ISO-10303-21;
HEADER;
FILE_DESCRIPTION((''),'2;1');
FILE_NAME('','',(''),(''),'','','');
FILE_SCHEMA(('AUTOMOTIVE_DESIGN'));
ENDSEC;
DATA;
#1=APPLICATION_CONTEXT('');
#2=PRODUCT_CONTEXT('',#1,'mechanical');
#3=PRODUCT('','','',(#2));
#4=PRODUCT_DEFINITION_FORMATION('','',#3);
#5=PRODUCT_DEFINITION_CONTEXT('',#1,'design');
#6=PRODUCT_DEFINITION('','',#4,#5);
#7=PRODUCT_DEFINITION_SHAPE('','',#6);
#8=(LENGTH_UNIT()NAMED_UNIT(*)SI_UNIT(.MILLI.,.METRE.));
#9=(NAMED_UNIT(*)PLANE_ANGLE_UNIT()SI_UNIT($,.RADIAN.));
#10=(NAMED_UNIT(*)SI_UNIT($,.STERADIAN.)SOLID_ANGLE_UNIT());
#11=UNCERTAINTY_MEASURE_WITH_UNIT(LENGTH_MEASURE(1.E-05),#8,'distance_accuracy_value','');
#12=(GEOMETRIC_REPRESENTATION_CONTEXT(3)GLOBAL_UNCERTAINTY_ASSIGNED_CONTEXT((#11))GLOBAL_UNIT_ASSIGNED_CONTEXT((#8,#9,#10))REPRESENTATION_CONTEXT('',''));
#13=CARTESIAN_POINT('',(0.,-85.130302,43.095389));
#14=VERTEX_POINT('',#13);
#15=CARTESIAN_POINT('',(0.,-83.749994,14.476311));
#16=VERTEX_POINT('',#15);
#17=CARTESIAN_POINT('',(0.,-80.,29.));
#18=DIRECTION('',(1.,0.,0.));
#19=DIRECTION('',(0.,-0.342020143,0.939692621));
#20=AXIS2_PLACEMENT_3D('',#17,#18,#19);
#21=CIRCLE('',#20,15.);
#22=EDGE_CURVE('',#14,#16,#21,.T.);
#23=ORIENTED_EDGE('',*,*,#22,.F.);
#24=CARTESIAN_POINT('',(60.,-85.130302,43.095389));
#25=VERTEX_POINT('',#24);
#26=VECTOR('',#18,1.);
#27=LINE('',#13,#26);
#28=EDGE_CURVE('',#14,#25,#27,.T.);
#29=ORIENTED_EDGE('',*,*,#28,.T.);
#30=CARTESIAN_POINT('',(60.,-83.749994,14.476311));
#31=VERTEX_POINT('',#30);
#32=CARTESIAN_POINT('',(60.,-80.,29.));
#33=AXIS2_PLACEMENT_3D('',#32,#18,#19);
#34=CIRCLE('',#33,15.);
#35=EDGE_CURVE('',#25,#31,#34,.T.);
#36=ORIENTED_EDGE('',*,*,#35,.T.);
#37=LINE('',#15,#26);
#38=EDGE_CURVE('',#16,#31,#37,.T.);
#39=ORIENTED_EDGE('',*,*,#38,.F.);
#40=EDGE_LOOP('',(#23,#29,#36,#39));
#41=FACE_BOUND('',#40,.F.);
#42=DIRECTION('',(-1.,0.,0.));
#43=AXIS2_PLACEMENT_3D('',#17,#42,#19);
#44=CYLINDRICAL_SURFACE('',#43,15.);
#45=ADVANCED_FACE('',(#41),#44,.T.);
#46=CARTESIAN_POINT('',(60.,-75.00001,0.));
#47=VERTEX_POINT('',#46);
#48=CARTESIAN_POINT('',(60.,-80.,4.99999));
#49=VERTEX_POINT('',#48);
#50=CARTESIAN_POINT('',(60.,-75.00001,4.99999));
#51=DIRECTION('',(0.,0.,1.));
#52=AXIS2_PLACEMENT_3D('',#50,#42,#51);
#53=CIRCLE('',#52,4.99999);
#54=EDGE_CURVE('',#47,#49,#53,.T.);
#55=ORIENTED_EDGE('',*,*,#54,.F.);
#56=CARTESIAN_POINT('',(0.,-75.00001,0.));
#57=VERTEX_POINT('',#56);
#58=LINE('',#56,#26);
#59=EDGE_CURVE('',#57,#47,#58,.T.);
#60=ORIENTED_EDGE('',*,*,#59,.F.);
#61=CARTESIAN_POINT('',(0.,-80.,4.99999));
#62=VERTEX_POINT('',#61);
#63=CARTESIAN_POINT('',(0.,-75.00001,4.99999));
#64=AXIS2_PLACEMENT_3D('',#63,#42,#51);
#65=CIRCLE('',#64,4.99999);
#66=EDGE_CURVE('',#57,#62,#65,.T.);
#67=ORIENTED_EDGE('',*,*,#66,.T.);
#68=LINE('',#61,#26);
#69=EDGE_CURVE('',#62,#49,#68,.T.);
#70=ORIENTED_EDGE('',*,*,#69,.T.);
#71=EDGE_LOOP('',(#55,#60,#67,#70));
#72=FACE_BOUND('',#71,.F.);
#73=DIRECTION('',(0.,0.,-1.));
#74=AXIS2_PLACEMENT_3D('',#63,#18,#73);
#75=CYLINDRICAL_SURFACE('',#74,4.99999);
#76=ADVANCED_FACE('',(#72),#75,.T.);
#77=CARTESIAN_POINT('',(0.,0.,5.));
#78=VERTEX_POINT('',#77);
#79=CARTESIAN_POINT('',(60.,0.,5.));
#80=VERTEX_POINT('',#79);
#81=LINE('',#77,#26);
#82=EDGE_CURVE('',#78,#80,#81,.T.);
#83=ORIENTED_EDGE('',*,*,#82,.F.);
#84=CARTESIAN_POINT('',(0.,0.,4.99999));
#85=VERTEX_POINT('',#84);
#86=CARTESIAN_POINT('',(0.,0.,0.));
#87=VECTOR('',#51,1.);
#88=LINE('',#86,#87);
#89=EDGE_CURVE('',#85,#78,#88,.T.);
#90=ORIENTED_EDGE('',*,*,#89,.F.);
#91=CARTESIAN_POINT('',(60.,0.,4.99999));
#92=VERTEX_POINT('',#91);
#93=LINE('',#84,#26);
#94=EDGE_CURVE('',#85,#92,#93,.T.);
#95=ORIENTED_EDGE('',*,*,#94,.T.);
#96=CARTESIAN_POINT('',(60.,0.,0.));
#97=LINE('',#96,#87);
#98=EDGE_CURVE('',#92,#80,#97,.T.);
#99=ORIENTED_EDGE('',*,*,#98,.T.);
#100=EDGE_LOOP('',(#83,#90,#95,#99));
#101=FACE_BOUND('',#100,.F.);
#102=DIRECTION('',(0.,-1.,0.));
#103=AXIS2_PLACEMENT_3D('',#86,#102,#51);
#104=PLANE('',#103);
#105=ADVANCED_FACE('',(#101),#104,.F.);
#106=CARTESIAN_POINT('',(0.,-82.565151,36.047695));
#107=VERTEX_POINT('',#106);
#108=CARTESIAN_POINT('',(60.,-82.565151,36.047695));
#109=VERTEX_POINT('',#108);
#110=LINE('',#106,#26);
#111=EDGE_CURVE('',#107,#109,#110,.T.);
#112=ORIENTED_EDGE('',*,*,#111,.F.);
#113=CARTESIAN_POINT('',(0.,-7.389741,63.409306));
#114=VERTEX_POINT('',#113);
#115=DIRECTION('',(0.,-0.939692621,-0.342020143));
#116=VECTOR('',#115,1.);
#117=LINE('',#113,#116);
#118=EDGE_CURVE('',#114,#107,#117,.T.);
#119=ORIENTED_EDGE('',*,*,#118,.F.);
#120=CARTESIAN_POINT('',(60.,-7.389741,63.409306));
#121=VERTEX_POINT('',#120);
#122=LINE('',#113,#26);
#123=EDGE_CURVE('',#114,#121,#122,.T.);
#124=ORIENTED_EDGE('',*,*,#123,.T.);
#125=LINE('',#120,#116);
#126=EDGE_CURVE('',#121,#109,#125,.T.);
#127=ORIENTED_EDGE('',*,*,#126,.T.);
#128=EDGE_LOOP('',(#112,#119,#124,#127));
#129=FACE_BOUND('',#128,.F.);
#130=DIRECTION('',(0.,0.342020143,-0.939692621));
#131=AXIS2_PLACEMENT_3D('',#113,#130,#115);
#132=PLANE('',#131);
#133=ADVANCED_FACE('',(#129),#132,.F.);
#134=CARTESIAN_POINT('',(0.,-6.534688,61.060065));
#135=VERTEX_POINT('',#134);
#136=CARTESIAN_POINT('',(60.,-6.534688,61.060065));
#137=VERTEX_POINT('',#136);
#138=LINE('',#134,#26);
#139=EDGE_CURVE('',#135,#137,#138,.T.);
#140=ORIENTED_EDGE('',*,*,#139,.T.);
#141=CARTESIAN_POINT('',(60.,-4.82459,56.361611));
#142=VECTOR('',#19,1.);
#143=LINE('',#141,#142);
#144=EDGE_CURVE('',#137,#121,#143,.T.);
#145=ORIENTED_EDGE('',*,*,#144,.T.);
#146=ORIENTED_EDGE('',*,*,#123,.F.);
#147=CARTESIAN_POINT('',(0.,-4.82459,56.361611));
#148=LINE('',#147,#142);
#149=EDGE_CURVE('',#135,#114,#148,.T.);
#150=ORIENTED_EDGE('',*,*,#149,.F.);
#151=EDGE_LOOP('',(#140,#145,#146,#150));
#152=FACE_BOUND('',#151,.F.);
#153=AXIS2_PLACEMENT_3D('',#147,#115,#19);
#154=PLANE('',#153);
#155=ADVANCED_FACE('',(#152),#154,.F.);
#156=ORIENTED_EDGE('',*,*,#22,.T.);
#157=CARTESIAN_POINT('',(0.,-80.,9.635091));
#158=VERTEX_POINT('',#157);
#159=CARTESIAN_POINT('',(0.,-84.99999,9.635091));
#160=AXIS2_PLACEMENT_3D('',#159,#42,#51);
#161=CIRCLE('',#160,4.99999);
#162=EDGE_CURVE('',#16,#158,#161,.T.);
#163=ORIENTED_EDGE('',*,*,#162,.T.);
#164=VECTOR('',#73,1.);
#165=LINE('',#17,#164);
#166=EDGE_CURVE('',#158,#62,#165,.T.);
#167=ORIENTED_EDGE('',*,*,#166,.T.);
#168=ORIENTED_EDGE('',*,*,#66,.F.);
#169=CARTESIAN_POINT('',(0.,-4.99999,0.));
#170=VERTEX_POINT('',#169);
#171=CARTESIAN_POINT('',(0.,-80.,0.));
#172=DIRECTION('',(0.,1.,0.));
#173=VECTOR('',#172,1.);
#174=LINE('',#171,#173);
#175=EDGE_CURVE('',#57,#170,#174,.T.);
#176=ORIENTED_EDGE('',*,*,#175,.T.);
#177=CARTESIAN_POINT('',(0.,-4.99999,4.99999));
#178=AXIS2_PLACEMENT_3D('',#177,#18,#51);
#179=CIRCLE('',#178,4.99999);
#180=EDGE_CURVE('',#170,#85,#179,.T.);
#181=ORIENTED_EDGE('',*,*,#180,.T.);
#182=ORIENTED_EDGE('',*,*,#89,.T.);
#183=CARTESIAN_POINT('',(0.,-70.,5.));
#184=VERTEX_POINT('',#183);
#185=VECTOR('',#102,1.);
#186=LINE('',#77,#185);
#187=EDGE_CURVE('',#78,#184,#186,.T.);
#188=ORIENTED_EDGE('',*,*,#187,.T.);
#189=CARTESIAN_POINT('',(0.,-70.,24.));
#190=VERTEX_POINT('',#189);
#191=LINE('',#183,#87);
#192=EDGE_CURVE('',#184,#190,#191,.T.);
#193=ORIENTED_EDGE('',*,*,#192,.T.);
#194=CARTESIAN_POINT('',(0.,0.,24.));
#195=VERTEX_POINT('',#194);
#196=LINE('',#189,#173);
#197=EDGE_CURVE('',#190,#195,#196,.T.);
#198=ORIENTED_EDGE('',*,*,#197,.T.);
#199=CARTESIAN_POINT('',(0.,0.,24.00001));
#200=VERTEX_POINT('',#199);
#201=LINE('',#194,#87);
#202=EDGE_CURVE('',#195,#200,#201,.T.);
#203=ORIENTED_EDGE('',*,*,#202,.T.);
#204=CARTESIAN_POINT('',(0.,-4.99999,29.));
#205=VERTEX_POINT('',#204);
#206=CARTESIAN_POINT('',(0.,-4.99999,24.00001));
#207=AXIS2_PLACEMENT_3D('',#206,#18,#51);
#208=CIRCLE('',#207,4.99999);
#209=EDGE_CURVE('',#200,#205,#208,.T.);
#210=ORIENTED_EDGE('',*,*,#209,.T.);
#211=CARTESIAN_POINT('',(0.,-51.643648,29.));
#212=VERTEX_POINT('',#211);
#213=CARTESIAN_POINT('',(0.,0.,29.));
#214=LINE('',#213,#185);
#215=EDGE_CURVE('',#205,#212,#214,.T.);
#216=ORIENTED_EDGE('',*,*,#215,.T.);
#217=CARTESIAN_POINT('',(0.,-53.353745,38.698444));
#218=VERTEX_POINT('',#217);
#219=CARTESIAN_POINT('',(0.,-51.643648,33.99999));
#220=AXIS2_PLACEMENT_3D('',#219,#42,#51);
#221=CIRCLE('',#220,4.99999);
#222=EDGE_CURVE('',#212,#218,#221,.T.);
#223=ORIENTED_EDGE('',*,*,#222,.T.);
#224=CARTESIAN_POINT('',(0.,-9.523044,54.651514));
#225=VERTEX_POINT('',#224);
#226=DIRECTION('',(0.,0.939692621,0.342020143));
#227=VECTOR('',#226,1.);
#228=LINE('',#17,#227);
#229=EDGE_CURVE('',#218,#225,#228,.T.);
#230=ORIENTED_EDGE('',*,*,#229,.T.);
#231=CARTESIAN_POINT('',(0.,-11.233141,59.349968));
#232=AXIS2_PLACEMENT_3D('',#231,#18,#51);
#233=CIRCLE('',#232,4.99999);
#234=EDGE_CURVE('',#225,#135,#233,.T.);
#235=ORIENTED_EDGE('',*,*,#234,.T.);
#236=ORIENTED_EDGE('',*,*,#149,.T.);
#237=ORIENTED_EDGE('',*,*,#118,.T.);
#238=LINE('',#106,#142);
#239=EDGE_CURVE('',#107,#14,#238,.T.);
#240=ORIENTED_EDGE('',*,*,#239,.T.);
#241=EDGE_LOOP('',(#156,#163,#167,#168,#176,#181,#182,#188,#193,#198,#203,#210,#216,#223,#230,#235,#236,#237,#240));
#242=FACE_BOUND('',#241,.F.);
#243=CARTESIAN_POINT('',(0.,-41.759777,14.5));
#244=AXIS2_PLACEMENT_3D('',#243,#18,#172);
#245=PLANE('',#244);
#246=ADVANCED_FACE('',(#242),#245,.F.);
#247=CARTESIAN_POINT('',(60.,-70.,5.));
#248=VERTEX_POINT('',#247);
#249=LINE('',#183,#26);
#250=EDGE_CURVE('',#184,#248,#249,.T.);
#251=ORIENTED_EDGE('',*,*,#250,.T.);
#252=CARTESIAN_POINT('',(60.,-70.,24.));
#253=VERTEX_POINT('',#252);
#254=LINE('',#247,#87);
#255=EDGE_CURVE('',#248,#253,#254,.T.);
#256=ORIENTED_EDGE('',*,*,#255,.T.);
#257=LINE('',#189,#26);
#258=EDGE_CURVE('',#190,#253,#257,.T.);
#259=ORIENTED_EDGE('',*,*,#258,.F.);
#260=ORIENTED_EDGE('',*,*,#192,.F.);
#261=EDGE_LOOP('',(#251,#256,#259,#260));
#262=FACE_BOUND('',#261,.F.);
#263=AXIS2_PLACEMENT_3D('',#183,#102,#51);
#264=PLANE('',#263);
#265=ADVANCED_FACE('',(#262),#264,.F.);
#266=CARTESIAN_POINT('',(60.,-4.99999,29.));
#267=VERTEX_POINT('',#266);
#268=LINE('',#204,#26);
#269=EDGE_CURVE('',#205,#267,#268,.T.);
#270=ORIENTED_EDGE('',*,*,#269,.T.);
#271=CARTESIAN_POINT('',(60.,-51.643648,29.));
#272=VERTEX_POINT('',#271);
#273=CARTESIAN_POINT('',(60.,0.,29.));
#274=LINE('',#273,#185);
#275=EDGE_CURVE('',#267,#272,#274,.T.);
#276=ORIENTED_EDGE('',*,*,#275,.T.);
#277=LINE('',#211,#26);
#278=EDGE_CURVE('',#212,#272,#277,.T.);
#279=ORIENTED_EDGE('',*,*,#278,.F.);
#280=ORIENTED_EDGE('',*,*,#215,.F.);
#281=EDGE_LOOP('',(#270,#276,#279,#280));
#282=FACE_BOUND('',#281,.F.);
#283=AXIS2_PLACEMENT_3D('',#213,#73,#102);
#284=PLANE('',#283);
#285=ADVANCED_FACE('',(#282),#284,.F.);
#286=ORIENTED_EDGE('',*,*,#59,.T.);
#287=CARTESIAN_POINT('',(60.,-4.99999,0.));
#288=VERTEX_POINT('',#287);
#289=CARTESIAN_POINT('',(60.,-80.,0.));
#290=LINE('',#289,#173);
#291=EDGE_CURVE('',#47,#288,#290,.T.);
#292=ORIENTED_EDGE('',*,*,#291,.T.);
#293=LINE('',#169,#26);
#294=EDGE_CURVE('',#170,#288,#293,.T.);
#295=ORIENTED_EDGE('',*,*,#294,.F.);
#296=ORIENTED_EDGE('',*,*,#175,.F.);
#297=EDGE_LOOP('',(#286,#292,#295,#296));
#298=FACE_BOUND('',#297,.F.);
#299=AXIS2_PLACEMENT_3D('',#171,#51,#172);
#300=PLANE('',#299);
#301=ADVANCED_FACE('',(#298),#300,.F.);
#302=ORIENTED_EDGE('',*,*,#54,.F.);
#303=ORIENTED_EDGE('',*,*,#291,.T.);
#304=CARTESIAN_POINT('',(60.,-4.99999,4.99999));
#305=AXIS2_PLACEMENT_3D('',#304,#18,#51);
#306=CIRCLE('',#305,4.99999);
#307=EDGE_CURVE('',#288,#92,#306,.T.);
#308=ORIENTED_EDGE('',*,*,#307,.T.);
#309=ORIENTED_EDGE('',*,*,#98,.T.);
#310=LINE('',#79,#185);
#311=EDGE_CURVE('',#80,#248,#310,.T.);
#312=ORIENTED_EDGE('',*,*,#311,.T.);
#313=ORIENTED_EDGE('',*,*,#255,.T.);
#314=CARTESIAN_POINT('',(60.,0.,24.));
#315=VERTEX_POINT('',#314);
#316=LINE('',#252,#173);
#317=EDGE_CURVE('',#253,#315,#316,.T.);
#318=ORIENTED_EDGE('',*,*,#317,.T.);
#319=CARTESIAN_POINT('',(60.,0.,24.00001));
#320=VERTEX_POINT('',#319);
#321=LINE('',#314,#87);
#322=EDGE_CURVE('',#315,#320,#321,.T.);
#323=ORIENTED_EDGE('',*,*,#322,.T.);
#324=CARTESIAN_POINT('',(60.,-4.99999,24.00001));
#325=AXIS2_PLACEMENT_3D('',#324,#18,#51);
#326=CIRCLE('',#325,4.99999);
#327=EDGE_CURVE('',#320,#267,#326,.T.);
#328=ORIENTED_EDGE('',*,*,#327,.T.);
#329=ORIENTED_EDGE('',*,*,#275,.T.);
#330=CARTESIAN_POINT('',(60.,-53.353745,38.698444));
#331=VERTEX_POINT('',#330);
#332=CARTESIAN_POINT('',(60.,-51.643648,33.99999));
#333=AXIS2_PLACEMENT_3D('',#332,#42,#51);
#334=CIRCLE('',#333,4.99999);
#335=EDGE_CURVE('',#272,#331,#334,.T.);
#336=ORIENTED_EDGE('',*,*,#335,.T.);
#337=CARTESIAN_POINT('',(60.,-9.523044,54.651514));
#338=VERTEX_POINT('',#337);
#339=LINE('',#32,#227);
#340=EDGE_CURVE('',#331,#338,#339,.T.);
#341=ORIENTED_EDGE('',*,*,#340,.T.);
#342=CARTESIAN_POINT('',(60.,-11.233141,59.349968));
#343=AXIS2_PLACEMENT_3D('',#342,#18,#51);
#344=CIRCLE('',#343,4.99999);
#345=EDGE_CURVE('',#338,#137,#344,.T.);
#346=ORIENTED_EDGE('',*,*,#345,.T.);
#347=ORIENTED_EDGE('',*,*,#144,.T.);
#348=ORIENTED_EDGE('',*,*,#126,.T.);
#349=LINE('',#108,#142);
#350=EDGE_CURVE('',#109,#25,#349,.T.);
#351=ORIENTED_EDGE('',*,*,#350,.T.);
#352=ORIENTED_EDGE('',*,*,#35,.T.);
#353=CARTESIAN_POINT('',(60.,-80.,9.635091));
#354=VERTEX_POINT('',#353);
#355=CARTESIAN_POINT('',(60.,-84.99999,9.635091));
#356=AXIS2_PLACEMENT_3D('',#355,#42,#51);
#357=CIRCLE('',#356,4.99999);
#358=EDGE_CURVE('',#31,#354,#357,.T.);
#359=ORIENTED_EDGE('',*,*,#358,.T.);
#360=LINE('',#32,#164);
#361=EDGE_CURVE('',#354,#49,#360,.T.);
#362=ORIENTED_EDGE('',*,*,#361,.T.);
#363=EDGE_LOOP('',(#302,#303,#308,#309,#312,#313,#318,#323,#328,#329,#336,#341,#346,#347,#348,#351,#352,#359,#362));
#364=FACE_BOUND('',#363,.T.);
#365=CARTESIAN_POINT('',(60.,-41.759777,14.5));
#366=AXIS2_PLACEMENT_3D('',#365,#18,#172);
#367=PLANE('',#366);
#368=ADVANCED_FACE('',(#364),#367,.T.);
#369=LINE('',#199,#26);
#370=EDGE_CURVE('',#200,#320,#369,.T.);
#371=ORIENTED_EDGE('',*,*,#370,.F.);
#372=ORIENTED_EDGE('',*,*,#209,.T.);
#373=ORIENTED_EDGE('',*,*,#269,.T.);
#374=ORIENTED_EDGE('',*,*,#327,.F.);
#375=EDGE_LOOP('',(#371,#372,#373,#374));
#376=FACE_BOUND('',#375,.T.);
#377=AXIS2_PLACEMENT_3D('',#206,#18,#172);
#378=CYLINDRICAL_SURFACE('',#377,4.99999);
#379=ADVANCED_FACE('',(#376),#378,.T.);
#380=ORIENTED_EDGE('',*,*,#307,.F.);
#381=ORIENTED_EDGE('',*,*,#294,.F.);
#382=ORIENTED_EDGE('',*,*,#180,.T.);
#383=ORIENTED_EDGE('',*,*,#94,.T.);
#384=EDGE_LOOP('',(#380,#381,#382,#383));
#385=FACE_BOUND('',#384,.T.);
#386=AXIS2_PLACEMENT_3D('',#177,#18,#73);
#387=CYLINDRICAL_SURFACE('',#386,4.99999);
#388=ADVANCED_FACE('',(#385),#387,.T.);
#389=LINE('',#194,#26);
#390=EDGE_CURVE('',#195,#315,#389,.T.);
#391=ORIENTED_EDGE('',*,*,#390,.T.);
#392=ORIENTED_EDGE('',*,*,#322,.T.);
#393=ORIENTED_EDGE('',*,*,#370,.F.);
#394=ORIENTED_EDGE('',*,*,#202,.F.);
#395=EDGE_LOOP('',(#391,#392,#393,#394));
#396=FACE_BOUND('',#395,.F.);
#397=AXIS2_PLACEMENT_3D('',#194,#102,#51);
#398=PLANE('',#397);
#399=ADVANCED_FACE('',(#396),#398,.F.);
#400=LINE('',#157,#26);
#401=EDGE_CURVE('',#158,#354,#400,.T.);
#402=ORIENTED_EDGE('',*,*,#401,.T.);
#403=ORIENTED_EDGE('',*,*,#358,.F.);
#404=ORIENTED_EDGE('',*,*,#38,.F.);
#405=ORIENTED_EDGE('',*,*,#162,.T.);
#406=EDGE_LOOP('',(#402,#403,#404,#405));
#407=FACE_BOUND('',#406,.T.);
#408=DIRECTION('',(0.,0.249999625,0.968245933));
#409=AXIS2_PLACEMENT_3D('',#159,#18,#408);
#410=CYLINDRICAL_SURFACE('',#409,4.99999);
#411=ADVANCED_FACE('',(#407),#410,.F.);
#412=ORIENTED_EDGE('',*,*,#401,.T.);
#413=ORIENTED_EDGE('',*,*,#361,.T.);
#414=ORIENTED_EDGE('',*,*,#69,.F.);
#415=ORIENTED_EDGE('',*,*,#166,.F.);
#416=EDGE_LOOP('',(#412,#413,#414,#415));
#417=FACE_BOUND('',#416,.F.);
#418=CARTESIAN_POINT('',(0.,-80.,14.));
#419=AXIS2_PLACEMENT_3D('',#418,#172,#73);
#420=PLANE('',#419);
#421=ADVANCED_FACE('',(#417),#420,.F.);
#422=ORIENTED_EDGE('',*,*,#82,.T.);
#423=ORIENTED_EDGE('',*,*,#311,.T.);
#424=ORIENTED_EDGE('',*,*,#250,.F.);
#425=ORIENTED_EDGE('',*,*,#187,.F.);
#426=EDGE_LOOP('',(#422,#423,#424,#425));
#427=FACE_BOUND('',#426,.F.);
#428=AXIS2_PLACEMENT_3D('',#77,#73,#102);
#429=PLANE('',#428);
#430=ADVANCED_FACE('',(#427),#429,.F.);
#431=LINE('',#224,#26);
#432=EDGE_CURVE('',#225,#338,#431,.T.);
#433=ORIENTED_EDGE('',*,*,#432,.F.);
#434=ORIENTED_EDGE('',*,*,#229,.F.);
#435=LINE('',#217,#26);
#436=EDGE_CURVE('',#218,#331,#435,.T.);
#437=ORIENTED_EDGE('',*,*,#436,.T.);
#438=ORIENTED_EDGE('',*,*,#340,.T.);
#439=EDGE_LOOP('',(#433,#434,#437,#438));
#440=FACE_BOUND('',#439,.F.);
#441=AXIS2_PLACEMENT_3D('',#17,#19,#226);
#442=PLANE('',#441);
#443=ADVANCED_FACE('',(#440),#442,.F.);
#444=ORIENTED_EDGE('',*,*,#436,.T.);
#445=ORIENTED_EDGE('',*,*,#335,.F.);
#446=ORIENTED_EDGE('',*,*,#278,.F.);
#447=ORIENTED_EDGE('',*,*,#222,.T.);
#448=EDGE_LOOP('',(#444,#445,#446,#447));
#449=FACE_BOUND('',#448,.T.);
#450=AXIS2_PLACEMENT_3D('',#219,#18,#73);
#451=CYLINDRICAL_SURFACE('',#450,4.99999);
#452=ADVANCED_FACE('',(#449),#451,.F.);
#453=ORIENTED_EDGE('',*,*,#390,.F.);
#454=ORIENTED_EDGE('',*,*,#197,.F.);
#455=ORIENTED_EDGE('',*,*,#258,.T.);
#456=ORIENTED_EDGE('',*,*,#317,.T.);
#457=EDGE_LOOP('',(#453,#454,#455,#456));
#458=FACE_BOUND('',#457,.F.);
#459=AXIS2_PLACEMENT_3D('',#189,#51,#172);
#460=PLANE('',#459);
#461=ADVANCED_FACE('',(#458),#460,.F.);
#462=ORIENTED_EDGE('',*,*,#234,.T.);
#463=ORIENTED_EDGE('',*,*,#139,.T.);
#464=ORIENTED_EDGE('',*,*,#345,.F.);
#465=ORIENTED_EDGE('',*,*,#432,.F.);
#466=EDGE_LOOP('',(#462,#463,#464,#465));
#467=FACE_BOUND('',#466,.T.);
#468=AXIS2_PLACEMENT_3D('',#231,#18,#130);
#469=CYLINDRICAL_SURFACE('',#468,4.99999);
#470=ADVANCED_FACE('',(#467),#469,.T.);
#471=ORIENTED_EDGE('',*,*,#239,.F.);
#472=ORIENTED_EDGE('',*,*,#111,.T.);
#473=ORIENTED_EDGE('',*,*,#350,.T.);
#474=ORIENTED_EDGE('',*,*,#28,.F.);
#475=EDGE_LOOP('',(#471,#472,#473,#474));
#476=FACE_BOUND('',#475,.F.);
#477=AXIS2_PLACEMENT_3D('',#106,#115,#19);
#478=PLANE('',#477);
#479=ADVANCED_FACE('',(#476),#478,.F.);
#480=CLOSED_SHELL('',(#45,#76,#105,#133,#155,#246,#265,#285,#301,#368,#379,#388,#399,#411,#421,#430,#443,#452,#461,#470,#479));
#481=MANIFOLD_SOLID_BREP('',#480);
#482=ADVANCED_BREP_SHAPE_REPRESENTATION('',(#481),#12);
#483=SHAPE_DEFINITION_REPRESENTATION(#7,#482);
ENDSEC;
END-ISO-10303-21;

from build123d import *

# Parameters (mm, degrees)
F1_DEPTH = 60
F2_R     = 4.99999


# Not quite as in the source:
# - a fillet or chamfer is up to 0.001 mm smaller than in the source, because OpenCascade refuses the exact size


with BuildPart() as f1:
    # F0 (on Right) → F1 (new body)
    with BuildSketch(Plane.YZ):
        Polygon((-80, 0), (0, 0), (0, 5), (-70, 5), (-70, 24), (0, 24), (0, 29), (-80, 29), (-80, 14), align=None)
        with BuildLine():
            ThreePointArc((-85.1303021499, 43.0953893118), (-94.7721162952, 26.395277335), (-80, 14))
            Line((-80, 14), (-80, 29))
            Line((-80, 29), (-82.5651510749, 36.0476946559))
            Line((-82.5651510749, 36.0476946559), (-85.1303021499, 43.0953893118))
        make_face()
        Polygon((-82.5651510749, 36.0476946559), (-80, 29), (-4.8245903371, 56.3616114661), (-7.3897414121, 63.4093061219), align=None)
    extrude(amount=F1_DEPTH)

    # F2 (radius 5 in the source; OpenCascade refuses exactly that, so slightly less here)
    f2_edges = [f1.edges().sort_by_distance(p)[0] for p in [
        (30, -80, 29),
        (30, -80, 14),
        (30, -80, 0),
        (30, 0, 0),
        (30, 0, 29),
        (30, -4.82459, 56.361611),
    ]]
    fillet(f2_edges, radius=F2_R)


solid = f1.part
